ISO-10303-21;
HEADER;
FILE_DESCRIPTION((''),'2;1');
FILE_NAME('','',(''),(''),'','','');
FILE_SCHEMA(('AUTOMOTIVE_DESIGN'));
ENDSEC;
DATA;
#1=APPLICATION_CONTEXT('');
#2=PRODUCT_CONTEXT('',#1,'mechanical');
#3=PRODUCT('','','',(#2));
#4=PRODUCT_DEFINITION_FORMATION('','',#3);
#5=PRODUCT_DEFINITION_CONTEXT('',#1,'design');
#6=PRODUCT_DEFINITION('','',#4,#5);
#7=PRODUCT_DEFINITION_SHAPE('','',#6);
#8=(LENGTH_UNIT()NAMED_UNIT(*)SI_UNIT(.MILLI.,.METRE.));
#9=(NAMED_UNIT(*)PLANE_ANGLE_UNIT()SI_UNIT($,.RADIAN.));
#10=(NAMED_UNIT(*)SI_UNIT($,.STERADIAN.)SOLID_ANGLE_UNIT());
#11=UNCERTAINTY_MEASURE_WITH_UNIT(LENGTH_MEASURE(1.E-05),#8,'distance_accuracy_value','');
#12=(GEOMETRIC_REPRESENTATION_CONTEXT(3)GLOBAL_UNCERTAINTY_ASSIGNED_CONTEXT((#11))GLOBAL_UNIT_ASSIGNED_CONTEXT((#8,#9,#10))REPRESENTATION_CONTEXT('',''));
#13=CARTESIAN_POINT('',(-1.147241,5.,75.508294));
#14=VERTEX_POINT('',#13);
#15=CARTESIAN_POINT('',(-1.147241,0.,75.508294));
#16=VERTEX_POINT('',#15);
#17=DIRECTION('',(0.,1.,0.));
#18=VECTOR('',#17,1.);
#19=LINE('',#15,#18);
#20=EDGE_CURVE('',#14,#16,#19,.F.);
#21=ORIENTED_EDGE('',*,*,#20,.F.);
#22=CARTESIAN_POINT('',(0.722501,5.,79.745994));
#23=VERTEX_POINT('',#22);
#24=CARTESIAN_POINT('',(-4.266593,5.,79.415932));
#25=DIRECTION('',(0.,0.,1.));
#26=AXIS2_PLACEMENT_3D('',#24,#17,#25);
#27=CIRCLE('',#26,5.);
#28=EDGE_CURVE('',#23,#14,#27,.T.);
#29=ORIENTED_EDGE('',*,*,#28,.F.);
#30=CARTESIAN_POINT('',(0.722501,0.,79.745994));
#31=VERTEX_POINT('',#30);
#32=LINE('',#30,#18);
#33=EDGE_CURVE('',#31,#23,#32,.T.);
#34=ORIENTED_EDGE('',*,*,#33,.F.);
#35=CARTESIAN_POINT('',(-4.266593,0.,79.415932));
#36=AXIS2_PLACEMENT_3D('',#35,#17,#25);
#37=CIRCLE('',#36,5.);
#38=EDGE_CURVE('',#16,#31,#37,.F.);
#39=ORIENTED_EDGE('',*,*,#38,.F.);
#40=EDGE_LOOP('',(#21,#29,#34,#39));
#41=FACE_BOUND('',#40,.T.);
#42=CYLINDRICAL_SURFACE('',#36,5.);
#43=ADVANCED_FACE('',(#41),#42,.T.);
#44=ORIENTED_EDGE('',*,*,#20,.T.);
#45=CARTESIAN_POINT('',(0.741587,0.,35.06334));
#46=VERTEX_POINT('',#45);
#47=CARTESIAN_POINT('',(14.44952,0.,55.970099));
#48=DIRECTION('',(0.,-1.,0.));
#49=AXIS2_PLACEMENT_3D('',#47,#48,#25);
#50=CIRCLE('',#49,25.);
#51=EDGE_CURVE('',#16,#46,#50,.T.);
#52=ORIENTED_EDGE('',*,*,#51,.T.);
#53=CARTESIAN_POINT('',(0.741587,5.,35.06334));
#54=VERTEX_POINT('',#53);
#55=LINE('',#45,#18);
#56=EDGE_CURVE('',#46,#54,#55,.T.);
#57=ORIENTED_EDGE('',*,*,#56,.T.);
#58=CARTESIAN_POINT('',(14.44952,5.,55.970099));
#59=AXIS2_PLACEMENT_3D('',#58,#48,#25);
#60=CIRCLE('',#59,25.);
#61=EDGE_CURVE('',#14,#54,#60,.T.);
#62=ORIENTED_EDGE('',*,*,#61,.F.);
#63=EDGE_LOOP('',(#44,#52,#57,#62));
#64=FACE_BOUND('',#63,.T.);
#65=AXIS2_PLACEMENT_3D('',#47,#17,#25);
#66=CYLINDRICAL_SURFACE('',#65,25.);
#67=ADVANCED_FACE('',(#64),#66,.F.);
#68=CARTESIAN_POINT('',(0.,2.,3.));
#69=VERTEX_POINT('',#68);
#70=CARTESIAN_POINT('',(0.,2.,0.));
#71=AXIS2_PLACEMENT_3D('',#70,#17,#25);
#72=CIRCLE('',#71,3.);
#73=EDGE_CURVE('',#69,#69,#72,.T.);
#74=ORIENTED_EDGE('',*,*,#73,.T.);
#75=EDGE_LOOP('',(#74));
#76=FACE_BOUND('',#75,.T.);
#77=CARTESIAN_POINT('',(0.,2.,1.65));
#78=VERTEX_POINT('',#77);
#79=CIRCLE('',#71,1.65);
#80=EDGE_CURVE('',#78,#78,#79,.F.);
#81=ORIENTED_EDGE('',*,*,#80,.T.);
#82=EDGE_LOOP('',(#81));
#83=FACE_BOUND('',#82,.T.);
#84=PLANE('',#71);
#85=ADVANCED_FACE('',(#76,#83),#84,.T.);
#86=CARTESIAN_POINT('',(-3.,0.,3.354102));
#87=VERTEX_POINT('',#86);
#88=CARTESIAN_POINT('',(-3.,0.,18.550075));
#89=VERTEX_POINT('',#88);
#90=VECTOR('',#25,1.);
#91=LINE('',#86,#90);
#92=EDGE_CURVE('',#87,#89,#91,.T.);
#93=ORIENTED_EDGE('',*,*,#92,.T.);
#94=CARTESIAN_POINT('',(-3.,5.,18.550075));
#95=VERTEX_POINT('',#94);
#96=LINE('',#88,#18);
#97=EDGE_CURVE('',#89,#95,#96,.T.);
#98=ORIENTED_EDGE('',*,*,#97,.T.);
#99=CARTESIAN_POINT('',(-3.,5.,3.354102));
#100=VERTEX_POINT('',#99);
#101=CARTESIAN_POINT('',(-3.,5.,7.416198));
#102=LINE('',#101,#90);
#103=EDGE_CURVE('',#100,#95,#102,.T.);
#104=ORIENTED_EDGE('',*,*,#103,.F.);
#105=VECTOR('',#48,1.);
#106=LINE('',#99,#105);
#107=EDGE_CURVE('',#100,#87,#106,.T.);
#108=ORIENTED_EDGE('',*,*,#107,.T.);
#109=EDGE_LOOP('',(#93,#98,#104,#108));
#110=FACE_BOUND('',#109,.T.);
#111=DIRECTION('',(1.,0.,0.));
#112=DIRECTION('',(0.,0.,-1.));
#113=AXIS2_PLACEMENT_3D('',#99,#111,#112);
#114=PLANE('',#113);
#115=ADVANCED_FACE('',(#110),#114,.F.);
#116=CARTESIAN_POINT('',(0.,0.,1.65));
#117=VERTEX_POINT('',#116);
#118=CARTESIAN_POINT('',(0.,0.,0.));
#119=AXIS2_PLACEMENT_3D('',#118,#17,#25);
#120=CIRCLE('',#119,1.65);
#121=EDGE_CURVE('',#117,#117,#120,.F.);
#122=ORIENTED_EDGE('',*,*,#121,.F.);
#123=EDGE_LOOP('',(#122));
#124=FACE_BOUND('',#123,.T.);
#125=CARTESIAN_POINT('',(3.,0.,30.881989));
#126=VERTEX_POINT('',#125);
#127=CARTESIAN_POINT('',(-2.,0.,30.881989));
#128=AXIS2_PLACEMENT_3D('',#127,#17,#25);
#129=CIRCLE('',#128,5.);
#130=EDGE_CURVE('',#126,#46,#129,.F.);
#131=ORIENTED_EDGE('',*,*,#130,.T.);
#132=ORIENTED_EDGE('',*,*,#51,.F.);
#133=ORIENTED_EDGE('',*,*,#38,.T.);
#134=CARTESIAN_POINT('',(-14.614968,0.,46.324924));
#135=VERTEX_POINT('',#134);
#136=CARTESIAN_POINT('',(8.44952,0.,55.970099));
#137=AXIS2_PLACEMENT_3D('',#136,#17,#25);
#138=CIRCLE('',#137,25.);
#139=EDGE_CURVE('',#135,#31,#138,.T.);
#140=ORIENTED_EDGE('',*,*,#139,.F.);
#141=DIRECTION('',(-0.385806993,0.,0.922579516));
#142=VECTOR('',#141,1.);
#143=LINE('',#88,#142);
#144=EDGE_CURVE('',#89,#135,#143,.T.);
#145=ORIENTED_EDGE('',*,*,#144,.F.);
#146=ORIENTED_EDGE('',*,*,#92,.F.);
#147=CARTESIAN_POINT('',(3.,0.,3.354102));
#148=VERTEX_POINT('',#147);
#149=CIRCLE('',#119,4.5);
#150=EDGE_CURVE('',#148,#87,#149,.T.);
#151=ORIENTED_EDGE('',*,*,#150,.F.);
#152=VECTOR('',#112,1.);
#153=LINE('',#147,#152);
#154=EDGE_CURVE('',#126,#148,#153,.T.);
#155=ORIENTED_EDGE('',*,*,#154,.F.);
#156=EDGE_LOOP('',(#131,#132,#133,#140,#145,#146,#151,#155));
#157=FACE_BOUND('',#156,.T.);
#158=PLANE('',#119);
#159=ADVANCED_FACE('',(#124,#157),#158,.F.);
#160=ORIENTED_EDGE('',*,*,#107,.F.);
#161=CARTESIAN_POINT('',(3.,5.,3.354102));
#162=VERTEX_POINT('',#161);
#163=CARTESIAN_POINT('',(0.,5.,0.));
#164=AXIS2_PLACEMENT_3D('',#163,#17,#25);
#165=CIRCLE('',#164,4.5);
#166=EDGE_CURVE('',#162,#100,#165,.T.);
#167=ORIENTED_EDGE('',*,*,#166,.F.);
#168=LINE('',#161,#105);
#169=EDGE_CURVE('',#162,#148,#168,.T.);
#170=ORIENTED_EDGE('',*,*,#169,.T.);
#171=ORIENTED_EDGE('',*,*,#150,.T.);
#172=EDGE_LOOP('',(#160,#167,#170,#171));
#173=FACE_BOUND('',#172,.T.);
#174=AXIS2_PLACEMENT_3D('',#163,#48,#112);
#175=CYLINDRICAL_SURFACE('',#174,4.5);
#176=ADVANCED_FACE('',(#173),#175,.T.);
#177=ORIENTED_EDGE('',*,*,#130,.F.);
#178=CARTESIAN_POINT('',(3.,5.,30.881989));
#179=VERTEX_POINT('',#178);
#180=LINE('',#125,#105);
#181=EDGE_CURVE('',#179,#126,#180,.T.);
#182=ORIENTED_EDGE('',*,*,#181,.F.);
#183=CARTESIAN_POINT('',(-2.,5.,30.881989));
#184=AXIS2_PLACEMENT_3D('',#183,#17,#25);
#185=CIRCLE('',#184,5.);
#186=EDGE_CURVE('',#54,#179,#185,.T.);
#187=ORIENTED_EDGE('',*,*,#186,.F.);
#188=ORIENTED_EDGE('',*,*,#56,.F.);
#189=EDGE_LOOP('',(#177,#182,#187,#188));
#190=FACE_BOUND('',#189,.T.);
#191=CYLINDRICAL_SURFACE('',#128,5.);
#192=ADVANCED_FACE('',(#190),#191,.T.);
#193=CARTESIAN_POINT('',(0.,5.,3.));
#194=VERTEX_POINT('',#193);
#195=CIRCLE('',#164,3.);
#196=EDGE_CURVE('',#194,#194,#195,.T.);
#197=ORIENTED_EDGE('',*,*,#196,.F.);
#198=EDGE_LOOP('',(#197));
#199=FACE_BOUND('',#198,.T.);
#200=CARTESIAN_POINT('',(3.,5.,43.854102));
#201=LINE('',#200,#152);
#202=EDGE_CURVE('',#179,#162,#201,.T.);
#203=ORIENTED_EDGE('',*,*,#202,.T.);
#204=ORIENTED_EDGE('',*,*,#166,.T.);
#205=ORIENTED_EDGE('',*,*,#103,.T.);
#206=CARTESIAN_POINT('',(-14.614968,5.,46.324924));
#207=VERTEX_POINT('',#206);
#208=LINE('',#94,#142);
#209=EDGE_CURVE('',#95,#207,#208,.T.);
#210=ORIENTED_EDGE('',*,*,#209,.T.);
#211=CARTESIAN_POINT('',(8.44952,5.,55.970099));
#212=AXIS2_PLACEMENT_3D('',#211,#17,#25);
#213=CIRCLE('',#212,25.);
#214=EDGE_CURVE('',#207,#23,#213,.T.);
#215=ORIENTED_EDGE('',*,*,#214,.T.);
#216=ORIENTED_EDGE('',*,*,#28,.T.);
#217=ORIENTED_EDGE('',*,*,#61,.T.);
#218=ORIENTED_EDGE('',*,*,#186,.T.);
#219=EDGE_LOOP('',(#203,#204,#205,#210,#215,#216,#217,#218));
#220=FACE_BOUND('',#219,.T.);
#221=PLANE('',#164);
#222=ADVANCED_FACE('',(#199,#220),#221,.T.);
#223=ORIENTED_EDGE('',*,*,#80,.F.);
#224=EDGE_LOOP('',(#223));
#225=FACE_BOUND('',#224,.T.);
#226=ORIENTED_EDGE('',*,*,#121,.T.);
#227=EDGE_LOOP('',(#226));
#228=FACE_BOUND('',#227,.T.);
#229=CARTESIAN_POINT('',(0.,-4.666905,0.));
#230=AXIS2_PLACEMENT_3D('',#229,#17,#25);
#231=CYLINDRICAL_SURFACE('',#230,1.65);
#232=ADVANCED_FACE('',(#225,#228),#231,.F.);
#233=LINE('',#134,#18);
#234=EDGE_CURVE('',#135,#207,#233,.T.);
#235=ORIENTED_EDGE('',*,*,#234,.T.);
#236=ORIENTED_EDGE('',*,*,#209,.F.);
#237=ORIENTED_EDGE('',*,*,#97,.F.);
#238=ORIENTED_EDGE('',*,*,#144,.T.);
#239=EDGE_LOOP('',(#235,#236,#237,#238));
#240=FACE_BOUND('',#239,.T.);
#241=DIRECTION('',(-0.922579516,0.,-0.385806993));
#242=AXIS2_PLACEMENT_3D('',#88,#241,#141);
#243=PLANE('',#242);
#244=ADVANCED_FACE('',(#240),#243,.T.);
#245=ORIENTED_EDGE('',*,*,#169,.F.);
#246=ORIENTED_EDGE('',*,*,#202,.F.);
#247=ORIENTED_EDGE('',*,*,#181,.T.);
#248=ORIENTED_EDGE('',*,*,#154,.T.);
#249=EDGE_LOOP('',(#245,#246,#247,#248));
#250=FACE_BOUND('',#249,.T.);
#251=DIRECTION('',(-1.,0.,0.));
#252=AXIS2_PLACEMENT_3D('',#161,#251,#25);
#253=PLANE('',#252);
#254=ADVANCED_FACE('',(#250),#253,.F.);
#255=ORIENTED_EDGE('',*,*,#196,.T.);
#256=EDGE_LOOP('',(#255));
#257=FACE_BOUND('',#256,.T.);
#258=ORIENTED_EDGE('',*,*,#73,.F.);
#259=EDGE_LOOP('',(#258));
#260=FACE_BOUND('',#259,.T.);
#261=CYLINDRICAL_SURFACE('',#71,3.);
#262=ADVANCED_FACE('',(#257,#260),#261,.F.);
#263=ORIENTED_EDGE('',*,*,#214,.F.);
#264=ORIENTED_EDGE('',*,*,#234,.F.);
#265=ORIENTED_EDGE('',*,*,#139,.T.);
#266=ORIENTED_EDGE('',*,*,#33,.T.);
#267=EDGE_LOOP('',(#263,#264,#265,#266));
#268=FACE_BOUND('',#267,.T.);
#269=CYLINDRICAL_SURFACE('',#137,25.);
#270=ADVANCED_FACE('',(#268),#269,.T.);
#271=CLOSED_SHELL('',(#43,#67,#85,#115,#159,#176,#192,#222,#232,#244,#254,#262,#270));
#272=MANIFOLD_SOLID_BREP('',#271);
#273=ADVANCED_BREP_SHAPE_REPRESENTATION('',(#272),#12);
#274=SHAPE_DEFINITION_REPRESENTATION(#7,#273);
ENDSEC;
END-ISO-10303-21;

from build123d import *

# Parameters (mm, degrees)
EXTRUDE_2_DEPTH     = 5
SKETCH_4_R          = 1.65
CUT_EXTRUDE_1_DEPTH = 5
EXTRUDE_3_DEPTH     = 5
SKETCH_7_R          = 3
CUT_EXTRUDE_2_DEPTH = 3
CUT_EXTRUDE_3_DEPTH = 7.5
EXTRUDE_4_DEPTH     = 5
FILLET_1_R          = 5


with BuildPart() as part:
    # 草图3 → 凸台-拉伸2 (new body)
    with BuildSketch(Plane(origin=(0, 0, 0), x_dir=(1, 0, 0), z_dir=(0, 1, 0))):
        with BuildLine():
            Line((-3, -3.354101966), (-3, -7.416198487))
            Line((-3, -7.416198487), (-3, -43.854101966))
            Line((-3, -43.854101966), (3, -43.854101966))
            Line((3, -43.854101966), (3, -10.583005244))
            Line((3, -10.583005244), (3, -7.416198487))
            Line((3, -7.416198487), (3, -3.354101966))
            ThreePointArc((3, -3.354101966), (0, 4.5), (-3, -3.354101966))
        make_face()
    extrude(amount=EXTRUDE_2_DEPTH)

    # 草图4 → 切除-拉伸1 (cut)
    with BuildSketch(Plane(origin=(0, 5, 0), x_dir=(1, 0, 0), z_dir=(0, 1, 0))):
        with Locations(Location((0, 0, 0), (0, 0, 270))):
            Circle(SKETCH_4_R)
    extrude(amount=-CUT_EXTRUDE_1_DEPTH, mode=Mode.SUBTRACT)

    # 草图6 → 凸台-拉伸3 (add)
    with BuildSketch(Plane(origin=(0, 5, 0), x_dir=(1, 0, 0), z_dir=(0, 1, 0))):
        with BuildLine():
            Line((3, -33.74604712), (-3, -33.74604712))
            ThreePointArc((-3, -33.74604712), (-16.46902092, -57.986607816), (0.722500961, -79.745993902))
            Line((0.722500961, -79.745993902), (1.949520222, -77.620734201))
            ThreePointArc((1.949520222, -77.620734201), (-10.543317179, -55.371702353), (3, -33.74604712))
        make_face()
    extrude(amount=-EXTRUDE_3_DEPTH)

    # 草图7 → 切除-拉伸2 (cut)
    with BuildSketch(Plane(origin=(0, 5, 0), x_dir=(1, 0, 0), z_dir=(0, 1, 0))):
        with Locations(Location((0, 0, 0), (0, 0, 270))):
            Circle(SKETCH_7_R)
    extrude(amount=-CUT_EXTRUDE_2_DEPTH, mode=Mode.SUBTRACT)

    # 草图8 → 切除-拉伸3 (cut)
    with BuildSketch(Plane(origin=(0, 5, 0), x_dir=(1, 0, 0), z_dir=(0, 1, 0))):
        with BuildLine():
            Line((-3, -38.067187498), (-3, -43.854101966))
            Line((-3, -43.854101966), (3, -43.854101966))
            Line((3, -43.854101966), (3, -33.74604712))
            ThreePointArc((3, -33.74604712), (-0.160637142, -35.683569047), (-3, -38.067187498))
        make_face()
    extrude(amount=-CUT_EXTRUDE_3_DEPTH, mode=Mode.SUBTRACT)

    # 草图9 → 凸台-拉伸4 (add)
    with BuildSketch(Plane(origin=(0, 5, 0), x_dir=(1, 0, 0), z_dir=(0, 1, 0))):
        with BuildLine():
            Line((-3, -18.550074543), (-14.614967684, -46.324924269))
            ThreePointArc((-14.614967684, -46.324924269), (-9.917875534, -39.010182445), (-3, -33.74604712))
            Line((-3, -33.74604712), (-3, -18.550074543))
        make_face()
    extrude(amount=-EXTRUDE_4_DEPTH)

    # 圆角1
    # the kernel refuses this fillet: 5 mm, written as the material it takes off along each edge
    with BuildSketch(Plane(origin=(1.949520222, 14.371610933, 77.620734201), x_dir=(-0.4999999999999996, 0, 0.8660254037844388), z_dir=(0, -1, 0))) as fillet_1_piece_1:
        with BuildLine():
            CenterArc((4.662743969, 4.485712903), FILLET_1_R, 188.59932897, 55.185648669)
            Line((-0.281046693, 3.738094086), (-0.379922506, 3.723141709))
            ThreePointArc((-0.379922506, 3.723141709), (-0.170079243, 1.866824898), (-0.1, 0))
            Line((-0.1, 0), (0, -0.1))
            ThreePointArc((0, -0.1), (1.227019261, -0.1), (2.409864412, -0.089714258))
            Line((2.409864412, -0.089714258), (2.454038521, 0))
        make_face()
    extrude(amount=23.743221866, mode=Mode.SUBTRACT)
    with BuildSketch(Plane(origin=(3, 12.160146085, 33.74604712), x_dir=(0, 0, -1), z_dir=(0, -1, 0))) as fillet_1_piece_2:
        with BuildLine():
            CenterArc((2.864058434, -5), FILLET_1_R, 90, 56.748348073)
            Line((-1.317293303, -2.258413296), (-1.400920337, -2.203581562))
            ThreePointArc((-1.400920337, -2.203581562), (-0.715482953, -1.096055019), (-0.088896208, 0.045798081))
            Line((-0.088896208, 0.045798081), (0, 0.1))
            Line((0, 0.1), (2.864058434, 0.1))
            Line((2.864058434, 0.1), (2.864058434, 0))
        make_face()
    extrude(amount=19.320292171, mode=Mode.SUBTRACT)


solid = part.part
